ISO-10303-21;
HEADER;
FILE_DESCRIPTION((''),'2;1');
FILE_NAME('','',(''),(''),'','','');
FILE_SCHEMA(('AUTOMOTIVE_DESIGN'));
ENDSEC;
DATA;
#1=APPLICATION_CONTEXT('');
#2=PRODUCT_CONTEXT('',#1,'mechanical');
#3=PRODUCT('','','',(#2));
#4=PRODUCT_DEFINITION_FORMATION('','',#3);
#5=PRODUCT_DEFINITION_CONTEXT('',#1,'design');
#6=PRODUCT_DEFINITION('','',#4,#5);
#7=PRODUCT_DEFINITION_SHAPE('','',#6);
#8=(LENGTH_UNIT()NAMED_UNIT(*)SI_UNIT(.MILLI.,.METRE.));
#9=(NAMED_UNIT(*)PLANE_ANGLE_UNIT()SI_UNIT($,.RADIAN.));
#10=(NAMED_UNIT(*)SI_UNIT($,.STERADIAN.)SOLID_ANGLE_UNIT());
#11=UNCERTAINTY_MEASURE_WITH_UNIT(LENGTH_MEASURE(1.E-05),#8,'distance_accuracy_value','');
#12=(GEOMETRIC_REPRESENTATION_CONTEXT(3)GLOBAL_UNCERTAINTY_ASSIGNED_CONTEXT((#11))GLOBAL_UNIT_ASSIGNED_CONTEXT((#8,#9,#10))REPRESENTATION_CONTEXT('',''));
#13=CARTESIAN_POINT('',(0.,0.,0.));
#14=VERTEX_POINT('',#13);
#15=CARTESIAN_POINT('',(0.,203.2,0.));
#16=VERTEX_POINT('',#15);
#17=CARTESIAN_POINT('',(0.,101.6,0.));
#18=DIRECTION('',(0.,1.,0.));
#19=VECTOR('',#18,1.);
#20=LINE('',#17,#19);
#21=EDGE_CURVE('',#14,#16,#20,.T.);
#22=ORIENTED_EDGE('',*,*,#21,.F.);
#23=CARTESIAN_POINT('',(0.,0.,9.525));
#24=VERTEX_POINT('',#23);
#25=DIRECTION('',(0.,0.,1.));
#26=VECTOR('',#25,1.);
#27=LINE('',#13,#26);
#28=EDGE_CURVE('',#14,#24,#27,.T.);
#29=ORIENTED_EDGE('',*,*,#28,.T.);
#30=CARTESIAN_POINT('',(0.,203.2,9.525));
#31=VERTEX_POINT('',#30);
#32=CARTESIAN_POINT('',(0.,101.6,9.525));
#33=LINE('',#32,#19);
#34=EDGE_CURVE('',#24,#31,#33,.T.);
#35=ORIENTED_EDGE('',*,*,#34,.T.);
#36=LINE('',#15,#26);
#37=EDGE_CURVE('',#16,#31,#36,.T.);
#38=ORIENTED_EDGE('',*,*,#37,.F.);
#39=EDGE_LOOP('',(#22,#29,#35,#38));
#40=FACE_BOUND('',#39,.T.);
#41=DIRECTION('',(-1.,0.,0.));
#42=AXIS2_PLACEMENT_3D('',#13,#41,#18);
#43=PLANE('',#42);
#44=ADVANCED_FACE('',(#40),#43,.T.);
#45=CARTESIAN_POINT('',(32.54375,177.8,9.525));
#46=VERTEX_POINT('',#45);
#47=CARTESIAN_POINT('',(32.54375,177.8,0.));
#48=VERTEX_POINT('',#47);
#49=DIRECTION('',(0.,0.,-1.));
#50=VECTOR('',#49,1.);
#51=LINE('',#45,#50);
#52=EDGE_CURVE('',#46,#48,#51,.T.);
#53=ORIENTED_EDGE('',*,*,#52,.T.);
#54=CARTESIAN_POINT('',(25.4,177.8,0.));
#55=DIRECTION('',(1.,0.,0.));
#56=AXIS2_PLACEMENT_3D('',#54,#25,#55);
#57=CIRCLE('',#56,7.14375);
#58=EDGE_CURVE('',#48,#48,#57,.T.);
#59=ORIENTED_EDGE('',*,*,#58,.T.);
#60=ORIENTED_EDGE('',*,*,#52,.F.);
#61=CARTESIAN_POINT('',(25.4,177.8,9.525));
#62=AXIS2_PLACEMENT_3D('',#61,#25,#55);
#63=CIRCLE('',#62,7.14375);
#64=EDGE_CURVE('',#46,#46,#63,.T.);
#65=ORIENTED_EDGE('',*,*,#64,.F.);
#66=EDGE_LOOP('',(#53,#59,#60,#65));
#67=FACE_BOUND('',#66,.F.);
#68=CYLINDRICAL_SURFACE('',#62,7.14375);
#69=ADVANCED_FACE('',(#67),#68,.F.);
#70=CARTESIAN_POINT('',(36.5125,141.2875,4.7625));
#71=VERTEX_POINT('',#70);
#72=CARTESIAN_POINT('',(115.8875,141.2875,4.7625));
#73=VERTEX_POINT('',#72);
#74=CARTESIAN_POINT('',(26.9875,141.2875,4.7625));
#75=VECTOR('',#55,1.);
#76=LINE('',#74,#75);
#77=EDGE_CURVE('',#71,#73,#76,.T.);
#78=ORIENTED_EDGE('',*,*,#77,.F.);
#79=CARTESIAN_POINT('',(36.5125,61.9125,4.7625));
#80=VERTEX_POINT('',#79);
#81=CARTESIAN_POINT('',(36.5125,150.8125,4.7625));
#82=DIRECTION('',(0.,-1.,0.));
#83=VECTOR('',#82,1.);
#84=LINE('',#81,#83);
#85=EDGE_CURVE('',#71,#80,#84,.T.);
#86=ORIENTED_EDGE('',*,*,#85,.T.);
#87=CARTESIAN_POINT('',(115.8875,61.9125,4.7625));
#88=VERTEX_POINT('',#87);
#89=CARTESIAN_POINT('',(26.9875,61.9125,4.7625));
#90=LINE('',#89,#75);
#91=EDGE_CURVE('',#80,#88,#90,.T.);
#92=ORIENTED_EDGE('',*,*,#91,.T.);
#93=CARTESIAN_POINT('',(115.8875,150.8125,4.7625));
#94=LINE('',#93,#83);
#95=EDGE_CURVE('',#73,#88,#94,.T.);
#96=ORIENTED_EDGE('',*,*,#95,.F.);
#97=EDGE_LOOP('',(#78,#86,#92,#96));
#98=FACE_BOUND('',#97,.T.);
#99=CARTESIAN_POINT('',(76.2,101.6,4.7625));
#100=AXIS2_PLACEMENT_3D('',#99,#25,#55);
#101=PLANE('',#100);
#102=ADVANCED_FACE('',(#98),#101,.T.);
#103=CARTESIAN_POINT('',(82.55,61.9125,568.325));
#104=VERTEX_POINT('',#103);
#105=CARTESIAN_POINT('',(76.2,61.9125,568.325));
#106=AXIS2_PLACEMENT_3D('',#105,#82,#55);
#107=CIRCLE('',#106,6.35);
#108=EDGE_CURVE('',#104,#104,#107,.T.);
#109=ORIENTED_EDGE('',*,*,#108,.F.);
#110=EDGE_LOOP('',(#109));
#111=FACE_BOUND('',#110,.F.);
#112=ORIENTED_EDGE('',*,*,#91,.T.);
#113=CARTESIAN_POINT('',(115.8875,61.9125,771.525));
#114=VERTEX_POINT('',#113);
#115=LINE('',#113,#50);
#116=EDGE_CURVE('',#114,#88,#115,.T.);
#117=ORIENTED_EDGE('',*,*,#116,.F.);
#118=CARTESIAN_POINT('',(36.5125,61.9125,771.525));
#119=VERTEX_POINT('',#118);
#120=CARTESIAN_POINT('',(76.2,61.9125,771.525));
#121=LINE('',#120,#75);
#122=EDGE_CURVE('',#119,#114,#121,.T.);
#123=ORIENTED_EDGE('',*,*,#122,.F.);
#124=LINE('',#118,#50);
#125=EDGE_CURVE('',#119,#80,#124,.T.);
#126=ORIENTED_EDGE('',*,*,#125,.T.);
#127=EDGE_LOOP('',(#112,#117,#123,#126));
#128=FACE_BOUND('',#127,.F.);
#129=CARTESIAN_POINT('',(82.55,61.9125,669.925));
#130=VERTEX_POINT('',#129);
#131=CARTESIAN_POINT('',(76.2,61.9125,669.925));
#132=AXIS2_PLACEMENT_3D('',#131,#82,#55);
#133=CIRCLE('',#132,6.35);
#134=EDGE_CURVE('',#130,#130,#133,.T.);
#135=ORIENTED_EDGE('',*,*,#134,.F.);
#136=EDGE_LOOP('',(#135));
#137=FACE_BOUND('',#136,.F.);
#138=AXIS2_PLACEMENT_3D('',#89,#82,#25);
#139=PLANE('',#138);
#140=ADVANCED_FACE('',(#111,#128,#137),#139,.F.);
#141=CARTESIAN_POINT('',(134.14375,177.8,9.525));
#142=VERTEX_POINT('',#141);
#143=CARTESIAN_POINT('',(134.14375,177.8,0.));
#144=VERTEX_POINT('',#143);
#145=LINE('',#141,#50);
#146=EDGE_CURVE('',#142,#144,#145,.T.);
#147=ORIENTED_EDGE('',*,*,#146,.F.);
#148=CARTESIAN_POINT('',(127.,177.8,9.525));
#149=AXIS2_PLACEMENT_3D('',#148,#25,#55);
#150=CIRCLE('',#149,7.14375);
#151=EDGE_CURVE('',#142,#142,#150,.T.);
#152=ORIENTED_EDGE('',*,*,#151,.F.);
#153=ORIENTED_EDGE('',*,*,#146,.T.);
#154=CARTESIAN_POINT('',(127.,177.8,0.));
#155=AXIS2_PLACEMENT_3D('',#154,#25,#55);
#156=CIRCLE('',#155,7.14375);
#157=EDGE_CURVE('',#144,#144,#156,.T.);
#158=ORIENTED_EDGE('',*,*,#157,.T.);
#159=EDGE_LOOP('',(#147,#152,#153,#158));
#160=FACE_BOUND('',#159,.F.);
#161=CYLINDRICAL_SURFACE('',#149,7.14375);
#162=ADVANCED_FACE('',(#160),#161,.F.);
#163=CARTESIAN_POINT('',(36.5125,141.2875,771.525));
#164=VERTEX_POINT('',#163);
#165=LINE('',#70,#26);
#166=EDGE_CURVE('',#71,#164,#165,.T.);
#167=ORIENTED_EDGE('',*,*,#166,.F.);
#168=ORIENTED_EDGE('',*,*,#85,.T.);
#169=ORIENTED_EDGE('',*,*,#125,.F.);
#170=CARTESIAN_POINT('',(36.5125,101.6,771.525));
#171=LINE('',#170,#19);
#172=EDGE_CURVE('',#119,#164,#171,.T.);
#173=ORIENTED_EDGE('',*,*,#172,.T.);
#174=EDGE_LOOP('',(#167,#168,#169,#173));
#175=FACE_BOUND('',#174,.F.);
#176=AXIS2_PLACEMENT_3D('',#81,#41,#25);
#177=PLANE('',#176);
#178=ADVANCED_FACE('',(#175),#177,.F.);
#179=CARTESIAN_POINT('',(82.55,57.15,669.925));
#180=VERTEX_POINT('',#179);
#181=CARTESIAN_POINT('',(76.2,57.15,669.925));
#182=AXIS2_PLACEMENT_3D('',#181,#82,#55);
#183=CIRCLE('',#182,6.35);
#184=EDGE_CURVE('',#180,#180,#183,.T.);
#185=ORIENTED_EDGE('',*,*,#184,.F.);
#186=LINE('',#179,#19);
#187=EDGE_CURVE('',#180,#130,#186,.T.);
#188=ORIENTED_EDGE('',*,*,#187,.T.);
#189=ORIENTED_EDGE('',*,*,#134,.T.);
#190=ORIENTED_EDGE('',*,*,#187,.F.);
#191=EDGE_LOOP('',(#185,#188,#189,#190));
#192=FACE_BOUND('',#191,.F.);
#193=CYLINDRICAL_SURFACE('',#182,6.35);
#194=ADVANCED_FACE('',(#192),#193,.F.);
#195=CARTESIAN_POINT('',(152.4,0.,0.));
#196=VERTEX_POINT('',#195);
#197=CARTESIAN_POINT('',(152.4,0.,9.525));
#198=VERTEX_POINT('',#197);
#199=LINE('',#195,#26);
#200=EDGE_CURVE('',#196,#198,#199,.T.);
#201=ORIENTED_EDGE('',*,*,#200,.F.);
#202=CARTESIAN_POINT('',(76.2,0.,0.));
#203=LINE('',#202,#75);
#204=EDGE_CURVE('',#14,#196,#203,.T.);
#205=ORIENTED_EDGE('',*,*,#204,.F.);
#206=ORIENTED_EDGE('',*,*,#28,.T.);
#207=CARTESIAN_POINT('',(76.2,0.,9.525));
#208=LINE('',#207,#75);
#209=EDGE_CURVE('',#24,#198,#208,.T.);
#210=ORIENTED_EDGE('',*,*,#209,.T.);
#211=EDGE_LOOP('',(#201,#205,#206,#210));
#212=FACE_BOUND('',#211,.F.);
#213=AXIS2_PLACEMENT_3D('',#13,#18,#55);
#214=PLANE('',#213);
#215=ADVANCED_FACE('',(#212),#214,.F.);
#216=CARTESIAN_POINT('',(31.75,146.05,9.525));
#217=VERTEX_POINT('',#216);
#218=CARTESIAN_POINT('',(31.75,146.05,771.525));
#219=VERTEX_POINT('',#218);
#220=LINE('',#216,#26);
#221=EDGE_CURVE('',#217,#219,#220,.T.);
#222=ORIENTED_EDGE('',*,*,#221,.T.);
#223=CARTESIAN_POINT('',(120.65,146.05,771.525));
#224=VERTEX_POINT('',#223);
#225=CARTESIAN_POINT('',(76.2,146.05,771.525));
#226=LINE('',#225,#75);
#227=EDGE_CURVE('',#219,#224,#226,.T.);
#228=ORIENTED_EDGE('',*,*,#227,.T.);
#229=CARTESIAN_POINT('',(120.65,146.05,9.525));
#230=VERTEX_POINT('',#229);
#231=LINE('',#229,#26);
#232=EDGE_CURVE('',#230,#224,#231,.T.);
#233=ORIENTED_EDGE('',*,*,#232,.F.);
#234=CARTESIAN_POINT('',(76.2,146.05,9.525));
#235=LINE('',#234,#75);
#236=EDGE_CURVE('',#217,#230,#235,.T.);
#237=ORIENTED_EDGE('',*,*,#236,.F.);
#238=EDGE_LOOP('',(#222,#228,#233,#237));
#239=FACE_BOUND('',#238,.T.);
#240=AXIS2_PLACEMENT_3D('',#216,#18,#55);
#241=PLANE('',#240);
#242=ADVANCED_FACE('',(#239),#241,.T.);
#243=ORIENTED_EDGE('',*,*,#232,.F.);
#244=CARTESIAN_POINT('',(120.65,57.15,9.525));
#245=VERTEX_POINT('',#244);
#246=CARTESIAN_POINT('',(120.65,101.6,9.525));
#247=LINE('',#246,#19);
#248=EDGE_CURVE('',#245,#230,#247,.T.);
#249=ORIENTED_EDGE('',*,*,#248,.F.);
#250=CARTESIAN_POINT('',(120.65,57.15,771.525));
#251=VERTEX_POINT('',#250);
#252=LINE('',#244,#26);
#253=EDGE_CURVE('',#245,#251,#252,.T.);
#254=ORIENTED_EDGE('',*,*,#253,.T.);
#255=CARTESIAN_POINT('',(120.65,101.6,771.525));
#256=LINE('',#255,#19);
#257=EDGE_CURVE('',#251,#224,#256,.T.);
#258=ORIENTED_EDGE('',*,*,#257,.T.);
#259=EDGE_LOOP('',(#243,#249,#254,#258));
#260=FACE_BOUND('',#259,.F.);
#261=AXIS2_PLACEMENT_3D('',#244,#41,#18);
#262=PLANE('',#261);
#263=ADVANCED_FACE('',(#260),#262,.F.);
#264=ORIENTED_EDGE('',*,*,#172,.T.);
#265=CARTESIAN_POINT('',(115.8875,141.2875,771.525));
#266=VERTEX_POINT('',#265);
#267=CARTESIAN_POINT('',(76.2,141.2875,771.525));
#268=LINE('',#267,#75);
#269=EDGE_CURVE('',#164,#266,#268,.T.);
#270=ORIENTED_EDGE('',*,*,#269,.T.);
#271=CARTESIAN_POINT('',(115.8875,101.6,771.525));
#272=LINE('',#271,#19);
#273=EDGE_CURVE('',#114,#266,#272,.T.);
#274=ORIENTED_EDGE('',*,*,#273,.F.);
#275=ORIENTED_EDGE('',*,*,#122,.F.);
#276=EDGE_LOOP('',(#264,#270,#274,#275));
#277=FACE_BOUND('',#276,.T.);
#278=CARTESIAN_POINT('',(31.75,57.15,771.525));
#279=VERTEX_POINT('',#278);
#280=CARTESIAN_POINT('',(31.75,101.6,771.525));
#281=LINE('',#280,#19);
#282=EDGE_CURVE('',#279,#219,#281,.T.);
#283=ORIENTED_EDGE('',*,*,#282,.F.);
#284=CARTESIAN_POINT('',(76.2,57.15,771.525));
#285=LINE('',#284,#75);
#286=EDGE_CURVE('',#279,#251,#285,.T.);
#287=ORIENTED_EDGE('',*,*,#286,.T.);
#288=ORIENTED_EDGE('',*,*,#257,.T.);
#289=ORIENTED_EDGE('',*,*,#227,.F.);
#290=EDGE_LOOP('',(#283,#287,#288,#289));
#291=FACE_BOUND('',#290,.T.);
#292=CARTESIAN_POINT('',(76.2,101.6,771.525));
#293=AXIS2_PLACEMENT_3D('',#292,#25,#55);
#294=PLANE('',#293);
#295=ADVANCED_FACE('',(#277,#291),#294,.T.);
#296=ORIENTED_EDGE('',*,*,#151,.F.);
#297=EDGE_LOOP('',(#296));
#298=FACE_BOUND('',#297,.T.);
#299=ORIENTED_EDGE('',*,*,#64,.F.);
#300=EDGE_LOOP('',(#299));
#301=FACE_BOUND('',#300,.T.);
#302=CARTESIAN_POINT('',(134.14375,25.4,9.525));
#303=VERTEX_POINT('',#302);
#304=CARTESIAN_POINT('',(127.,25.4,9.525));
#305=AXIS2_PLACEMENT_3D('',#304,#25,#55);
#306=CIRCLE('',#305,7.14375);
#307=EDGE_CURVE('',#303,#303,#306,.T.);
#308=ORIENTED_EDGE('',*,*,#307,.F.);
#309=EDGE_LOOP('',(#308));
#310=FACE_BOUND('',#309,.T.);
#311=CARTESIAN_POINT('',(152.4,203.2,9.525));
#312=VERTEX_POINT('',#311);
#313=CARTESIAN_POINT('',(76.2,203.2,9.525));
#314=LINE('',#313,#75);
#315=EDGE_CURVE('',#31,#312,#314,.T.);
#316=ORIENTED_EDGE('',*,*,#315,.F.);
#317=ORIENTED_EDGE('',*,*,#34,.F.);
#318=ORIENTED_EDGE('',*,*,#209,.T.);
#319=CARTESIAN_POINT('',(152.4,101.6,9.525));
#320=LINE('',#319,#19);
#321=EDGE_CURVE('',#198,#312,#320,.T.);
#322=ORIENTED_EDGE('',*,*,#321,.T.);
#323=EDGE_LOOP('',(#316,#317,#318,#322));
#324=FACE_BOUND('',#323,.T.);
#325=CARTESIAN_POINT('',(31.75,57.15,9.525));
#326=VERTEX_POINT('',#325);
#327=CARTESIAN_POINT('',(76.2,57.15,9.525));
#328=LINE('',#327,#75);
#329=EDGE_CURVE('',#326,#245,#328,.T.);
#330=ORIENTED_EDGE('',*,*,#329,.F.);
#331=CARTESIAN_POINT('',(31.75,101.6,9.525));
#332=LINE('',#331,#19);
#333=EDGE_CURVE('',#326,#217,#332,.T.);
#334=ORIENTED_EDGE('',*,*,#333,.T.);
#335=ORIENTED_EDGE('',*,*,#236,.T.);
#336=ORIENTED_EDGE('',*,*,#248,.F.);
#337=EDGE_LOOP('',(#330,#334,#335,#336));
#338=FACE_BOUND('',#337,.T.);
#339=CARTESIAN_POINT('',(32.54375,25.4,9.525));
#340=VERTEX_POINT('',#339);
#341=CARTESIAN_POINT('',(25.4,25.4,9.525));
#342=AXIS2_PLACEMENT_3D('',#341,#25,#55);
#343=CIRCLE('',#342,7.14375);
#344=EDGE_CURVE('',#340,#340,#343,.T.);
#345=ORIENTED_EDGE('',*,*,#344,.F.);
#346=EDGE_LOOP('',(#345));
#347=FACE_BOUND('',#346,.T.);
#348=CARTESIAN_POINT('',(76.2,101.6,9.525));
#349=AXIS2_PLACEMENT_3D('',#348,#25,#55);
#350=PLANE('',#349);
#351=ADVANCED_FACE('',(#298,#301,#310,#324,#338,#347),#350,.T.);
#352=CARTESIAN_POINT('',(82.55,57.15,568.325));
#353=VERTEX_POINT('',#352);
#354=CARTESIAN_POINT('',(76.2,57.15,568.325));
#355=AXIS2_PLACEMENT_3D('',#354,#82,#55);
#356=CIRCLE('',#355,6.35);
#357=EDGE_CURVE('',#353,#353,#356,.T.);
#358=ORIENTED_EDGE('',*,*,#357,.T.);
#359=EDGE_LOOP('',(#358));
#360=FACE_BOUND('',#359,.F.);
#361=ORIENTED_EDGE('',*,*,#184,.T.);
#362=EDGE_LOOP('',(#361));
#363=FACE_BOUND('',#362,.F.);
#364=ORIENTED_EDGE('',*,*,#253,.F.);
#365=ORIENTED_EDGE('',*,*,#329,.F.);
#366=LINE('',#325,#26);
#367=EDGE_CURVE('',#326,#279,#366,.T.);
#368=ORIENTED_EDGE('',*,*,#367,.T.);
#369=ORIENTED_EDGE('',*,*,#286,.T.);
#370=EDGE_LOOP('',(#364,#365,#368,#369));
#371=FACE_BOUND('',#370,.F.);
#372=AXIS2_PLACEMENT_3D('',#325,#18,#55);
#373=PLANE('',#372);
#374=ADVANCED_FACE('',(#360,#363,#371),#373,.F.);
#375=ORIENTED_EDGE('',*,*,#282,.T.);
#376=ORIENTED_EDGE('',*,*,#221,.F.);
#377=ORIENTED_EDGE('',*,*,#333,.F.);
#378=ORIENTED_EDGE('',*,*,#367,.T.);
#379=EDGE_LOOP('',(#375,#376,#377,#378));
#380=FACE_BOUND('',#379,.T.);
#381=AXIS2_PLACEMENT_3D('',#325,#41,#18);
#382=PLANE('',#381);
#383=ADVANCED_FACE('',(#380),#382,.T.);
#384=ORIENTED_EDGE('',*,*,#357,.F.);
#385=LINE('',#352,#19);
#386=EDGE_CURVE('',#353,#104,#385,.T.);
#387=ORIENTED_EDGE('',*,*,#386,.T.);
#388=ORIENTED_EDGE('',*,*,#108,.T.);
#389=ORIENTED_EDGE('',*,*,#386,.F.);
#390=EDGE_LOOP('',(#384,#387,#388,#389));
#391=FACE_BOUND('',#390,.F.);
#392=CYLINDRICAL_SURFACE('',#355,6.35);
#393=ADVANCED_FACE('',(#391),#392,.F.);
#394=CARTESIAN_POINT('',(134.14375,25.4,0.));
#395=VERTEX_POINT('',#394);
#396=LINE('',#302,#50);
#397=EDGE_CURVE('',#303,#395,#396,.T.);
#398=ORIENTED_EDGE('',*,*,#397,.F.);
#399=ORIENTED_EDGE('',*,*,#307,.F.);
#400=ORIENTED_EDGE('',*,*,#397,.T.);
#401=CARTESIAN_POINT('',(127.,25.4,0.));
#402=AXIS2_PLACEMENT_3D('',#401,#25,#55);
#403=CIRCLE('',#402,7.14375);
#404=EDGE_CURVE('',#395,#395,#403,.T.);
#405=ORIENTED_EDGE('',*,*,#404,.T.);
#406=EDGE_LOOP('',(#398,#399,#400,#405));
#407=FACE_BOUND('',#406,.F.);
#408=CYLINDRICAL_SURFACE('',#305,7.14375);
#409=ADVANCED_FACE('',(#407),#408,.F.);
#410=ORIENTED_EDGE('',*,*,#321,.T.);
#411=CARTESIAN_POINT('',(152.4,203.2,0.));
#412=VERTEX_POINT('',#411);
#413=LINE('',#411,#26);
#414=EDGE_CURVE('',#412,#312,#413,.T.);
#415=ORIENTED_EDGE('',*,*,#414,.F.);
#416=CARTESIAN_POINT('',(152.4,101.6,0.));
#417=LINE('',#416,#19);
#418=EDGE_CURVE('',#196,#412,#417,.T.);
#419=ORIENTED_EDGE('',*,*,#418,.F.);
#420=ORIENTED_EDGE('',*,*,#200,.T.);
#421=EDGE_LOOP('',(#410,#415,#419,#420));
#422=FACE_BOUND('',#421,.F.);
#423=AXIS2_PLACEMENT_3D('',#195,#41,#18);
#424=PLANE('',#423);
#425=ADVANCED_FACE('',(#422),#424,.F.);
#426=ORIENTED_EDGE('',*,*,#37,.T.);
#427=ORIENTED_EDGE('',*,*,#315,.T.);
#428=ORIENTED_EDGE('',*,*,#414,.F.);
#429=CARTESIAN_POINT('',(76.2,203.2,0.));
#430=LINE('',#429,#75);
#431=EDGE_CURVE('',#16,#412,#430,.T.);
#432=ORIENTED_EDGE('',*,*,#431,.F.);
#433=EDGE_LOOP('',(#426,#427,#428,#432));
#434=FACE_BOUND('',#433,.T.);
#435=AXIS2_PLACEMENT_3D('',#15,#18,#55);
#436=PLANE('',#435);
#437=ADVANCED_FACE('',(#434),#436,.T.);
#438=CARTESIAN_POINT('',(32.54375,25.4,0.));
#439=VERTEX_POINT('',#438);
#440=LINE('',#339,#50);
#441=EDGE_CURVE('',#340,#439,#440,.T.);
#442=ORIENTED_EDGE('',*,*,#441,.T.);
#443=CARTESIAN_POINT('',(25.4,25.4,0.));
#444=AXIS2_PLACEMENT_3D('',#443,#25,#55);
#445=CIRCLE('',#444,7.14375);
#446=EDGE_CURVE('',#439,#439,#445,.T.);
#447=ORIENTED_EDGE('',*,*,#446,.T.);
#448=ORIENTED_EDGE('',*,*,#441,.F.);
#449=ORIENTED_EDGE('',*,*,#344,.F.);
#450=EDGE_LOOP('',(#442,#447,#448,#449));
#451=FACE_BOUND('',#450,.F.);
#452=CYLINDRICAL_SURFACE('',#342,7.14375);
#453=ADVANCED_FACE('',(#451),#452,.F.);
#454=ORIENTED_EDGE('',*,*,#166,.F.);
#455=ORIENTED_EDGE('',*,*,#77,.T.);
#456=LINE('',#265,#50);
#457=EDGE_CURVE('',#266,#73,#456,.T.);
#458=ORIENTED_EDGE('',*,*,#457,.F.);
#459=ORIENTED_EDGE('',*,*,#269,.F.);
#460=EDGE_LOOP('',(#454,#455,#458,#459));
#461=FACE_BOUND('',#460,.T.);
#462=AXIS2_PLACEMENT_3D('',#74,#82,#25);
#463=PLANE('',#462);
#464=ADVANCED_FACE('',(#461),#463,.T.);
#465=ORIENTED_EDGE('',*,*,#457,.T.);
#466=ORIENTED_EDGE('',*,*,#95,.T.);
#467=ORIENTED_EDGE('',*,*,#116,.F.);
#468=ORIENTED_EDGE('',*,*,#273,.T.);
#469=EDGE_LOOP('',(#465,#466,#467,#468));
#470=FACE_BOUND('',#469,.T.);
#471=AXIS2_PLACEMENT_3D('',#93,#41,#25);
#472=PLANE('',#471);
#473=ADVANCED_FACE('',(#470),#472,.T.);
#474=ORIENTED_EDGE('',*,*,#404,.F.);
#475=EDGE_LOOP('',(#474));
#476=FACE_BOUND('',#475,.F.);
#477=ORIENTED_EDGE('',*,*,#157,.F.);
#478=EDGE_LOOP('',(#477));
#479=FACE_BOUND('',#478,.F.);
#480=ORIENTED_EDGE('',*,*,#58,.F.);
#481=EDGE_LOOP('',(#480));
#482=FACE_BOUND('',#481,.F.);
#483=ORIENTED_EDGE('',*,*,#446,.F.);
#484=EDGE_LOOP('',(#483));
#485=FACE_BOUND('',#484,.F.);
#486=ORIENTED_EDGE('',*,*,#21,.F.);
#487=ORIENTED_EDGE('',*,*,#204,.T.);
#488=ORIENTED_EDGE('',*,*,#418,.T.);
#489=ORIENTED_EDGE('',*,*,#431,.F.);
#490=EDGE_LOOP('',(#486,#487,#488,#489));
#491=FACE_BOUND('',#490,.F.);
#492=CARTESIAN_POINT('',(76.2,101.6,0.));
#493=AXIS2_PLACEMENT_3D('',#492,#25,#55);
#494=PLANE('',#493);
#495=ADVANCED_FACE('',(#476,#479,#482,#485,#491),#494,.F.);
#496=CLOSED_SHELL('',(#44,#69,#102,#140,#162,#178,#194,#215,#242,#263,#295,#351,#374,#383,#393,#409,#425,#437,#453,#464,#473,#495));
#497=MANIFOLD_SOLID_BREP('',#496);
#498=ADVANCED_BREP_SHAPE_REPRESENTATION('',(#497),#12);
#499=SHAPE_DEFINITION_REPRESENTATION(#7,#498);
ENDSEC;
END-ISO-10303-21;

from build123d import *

# Parameters (mm, degrees)
F0_W        = 152.4
F0_H        = 203.2
F1_DEPTH    = 9.525
F2_W        = 88.9
F2_H        = 88.9
F3_DEPTH    = 762
F4_R        = 7.14375
F5_DEPTH    = 25.4
F7_T        = 4.7625
F7_T3_DEPTH = 98.425
F7_T5_DEPTH = 98.425
F6_R        = 6.35
F8_DEPTH    = 25.4


# Not quite as in the source:
# - a shell that OpenCascade refuses in one call is made with other operations: the cavity is built on its own and cut out


with BuildPart() as f1:
    # F0 (on Top) → F1 (new body)
    with BuildSketch(Plane.XY):
        with Locations((76.2, 101.6)):
            Rectangle(F0_W, F0_H)
    extrude(amount=F1_DEPTH)

    # F2 (on face) → F3 (join)
    with BuildSketch(Plane.XY.offset(9.525)):
        with Locations((76.2, 101.6)):
            Rectangle(F2_W, F2_H)
    extrude(amount=F3_DEPTH)

    # F4 (on face) → F5 (cut)
    with BuildSketch(Plane.XY.offset(9.525)):
        with Locations((127, 177.8)):
            Circle(F4_R)
        with Locations((127, 25.4)):
            Circle(F4_R)
        with Locations((25.4, 25.4)):
            Circle(F4_R)
        with Locations((25.4, 177.8)):
            Circle(F4_R)
    extrude(amount=-F5_DEPTH, mode=Mode.SUBTRACT)

    # F7: shell of thickness 4.7625, made by hand


with BuildPart() as f7_core1:
    # F7_t2: copy of F1
    add(f1.part)

    # the walls: a layer under each face that stays
    f7_faces = [f7_core1.faces().sort_by_distance(p)[0] for p in [
        (0, 101.6, 4.7625),
        (76.2, 203.2, 4.7625),
        (76.2, 0, 4.7625),
        (76.2, 101.6, 0),
        (25.4, 33.8666666667, 9.525),
        (152.4, 101.6, 4.7625),
        (18.25625, 25.4, 4.7625),
        (119.85625, 25.4, 4.7625),
        (18.25625, 177.8, 4.7625),
        (119.85625, 177.8, 4.7625),
        (120.65, 101.6, 390.525),
        (76.2, 57.15, 390.525),
        (76.2, 146.05, 390.525),
        (31.75, 101.6, 390.525),
    ]]
    thicken(f7_faces, amount=-F7_T, mode=Mode.SUBTRACT)

    # F7_s4 → F7_t3 (cut)
    with BuildSketch(Plane.XZ.offset(-150.8125)):
        Polygon((120.697625, 9.572625), (120.65, 4.7625), (115.8875, 4.7625), (115.8875, 9.525), align=None)
        Polygon((31.702375, 9.572625), (31.75, 4.7625), (36.5125, 4.7625), (36.5125, 9.525), align=None)
    extrude(amount=F7_T3_DEPTH, mode=Mode.SUBTRACT)

    # F7_s6 → F7_t5 (cut)
    with BuildSketch(Plane.YZ.offset(26.9875)):
        Polygon((57.102375, 9.572625), (57.15, 4.7625), (61.9125, 4.7625), (61.9125, 9.525), align=None)
        Polygon((146.097625, 9.572625), (146.05, 4.7625), (141.2875, 4.7625), (141.2875, 9.525), align=None)
    extrude(amount=F7_T5_DEPTH, mode=Mode.SUBTRACT)


with BuildPart() as f1_1:
    add(f1.part)

    # what is left inside the walls is the cavity
    f7_cavity = [f7_core1.part.solids().sort_by_distance(p)[0] for p in [
        (36.560125, 88.370833, 388.14375),
    ]]
    add(f7_cavity, mode=Mode.SUBTRACT)

    # F6 (on face) → F8 (cut)
    with BuildSketch(Plane.XZ.offset(-57.15)):
        with Locations((76.2, 669.925)):
            Circle(F6_R)
        with Locations((76.2, 568.325)):
            Circle(F6_R)
    extrude(amount=-F8_DEPTH, mode=Mode.SUBTRACT)


solid = f1_1.part
